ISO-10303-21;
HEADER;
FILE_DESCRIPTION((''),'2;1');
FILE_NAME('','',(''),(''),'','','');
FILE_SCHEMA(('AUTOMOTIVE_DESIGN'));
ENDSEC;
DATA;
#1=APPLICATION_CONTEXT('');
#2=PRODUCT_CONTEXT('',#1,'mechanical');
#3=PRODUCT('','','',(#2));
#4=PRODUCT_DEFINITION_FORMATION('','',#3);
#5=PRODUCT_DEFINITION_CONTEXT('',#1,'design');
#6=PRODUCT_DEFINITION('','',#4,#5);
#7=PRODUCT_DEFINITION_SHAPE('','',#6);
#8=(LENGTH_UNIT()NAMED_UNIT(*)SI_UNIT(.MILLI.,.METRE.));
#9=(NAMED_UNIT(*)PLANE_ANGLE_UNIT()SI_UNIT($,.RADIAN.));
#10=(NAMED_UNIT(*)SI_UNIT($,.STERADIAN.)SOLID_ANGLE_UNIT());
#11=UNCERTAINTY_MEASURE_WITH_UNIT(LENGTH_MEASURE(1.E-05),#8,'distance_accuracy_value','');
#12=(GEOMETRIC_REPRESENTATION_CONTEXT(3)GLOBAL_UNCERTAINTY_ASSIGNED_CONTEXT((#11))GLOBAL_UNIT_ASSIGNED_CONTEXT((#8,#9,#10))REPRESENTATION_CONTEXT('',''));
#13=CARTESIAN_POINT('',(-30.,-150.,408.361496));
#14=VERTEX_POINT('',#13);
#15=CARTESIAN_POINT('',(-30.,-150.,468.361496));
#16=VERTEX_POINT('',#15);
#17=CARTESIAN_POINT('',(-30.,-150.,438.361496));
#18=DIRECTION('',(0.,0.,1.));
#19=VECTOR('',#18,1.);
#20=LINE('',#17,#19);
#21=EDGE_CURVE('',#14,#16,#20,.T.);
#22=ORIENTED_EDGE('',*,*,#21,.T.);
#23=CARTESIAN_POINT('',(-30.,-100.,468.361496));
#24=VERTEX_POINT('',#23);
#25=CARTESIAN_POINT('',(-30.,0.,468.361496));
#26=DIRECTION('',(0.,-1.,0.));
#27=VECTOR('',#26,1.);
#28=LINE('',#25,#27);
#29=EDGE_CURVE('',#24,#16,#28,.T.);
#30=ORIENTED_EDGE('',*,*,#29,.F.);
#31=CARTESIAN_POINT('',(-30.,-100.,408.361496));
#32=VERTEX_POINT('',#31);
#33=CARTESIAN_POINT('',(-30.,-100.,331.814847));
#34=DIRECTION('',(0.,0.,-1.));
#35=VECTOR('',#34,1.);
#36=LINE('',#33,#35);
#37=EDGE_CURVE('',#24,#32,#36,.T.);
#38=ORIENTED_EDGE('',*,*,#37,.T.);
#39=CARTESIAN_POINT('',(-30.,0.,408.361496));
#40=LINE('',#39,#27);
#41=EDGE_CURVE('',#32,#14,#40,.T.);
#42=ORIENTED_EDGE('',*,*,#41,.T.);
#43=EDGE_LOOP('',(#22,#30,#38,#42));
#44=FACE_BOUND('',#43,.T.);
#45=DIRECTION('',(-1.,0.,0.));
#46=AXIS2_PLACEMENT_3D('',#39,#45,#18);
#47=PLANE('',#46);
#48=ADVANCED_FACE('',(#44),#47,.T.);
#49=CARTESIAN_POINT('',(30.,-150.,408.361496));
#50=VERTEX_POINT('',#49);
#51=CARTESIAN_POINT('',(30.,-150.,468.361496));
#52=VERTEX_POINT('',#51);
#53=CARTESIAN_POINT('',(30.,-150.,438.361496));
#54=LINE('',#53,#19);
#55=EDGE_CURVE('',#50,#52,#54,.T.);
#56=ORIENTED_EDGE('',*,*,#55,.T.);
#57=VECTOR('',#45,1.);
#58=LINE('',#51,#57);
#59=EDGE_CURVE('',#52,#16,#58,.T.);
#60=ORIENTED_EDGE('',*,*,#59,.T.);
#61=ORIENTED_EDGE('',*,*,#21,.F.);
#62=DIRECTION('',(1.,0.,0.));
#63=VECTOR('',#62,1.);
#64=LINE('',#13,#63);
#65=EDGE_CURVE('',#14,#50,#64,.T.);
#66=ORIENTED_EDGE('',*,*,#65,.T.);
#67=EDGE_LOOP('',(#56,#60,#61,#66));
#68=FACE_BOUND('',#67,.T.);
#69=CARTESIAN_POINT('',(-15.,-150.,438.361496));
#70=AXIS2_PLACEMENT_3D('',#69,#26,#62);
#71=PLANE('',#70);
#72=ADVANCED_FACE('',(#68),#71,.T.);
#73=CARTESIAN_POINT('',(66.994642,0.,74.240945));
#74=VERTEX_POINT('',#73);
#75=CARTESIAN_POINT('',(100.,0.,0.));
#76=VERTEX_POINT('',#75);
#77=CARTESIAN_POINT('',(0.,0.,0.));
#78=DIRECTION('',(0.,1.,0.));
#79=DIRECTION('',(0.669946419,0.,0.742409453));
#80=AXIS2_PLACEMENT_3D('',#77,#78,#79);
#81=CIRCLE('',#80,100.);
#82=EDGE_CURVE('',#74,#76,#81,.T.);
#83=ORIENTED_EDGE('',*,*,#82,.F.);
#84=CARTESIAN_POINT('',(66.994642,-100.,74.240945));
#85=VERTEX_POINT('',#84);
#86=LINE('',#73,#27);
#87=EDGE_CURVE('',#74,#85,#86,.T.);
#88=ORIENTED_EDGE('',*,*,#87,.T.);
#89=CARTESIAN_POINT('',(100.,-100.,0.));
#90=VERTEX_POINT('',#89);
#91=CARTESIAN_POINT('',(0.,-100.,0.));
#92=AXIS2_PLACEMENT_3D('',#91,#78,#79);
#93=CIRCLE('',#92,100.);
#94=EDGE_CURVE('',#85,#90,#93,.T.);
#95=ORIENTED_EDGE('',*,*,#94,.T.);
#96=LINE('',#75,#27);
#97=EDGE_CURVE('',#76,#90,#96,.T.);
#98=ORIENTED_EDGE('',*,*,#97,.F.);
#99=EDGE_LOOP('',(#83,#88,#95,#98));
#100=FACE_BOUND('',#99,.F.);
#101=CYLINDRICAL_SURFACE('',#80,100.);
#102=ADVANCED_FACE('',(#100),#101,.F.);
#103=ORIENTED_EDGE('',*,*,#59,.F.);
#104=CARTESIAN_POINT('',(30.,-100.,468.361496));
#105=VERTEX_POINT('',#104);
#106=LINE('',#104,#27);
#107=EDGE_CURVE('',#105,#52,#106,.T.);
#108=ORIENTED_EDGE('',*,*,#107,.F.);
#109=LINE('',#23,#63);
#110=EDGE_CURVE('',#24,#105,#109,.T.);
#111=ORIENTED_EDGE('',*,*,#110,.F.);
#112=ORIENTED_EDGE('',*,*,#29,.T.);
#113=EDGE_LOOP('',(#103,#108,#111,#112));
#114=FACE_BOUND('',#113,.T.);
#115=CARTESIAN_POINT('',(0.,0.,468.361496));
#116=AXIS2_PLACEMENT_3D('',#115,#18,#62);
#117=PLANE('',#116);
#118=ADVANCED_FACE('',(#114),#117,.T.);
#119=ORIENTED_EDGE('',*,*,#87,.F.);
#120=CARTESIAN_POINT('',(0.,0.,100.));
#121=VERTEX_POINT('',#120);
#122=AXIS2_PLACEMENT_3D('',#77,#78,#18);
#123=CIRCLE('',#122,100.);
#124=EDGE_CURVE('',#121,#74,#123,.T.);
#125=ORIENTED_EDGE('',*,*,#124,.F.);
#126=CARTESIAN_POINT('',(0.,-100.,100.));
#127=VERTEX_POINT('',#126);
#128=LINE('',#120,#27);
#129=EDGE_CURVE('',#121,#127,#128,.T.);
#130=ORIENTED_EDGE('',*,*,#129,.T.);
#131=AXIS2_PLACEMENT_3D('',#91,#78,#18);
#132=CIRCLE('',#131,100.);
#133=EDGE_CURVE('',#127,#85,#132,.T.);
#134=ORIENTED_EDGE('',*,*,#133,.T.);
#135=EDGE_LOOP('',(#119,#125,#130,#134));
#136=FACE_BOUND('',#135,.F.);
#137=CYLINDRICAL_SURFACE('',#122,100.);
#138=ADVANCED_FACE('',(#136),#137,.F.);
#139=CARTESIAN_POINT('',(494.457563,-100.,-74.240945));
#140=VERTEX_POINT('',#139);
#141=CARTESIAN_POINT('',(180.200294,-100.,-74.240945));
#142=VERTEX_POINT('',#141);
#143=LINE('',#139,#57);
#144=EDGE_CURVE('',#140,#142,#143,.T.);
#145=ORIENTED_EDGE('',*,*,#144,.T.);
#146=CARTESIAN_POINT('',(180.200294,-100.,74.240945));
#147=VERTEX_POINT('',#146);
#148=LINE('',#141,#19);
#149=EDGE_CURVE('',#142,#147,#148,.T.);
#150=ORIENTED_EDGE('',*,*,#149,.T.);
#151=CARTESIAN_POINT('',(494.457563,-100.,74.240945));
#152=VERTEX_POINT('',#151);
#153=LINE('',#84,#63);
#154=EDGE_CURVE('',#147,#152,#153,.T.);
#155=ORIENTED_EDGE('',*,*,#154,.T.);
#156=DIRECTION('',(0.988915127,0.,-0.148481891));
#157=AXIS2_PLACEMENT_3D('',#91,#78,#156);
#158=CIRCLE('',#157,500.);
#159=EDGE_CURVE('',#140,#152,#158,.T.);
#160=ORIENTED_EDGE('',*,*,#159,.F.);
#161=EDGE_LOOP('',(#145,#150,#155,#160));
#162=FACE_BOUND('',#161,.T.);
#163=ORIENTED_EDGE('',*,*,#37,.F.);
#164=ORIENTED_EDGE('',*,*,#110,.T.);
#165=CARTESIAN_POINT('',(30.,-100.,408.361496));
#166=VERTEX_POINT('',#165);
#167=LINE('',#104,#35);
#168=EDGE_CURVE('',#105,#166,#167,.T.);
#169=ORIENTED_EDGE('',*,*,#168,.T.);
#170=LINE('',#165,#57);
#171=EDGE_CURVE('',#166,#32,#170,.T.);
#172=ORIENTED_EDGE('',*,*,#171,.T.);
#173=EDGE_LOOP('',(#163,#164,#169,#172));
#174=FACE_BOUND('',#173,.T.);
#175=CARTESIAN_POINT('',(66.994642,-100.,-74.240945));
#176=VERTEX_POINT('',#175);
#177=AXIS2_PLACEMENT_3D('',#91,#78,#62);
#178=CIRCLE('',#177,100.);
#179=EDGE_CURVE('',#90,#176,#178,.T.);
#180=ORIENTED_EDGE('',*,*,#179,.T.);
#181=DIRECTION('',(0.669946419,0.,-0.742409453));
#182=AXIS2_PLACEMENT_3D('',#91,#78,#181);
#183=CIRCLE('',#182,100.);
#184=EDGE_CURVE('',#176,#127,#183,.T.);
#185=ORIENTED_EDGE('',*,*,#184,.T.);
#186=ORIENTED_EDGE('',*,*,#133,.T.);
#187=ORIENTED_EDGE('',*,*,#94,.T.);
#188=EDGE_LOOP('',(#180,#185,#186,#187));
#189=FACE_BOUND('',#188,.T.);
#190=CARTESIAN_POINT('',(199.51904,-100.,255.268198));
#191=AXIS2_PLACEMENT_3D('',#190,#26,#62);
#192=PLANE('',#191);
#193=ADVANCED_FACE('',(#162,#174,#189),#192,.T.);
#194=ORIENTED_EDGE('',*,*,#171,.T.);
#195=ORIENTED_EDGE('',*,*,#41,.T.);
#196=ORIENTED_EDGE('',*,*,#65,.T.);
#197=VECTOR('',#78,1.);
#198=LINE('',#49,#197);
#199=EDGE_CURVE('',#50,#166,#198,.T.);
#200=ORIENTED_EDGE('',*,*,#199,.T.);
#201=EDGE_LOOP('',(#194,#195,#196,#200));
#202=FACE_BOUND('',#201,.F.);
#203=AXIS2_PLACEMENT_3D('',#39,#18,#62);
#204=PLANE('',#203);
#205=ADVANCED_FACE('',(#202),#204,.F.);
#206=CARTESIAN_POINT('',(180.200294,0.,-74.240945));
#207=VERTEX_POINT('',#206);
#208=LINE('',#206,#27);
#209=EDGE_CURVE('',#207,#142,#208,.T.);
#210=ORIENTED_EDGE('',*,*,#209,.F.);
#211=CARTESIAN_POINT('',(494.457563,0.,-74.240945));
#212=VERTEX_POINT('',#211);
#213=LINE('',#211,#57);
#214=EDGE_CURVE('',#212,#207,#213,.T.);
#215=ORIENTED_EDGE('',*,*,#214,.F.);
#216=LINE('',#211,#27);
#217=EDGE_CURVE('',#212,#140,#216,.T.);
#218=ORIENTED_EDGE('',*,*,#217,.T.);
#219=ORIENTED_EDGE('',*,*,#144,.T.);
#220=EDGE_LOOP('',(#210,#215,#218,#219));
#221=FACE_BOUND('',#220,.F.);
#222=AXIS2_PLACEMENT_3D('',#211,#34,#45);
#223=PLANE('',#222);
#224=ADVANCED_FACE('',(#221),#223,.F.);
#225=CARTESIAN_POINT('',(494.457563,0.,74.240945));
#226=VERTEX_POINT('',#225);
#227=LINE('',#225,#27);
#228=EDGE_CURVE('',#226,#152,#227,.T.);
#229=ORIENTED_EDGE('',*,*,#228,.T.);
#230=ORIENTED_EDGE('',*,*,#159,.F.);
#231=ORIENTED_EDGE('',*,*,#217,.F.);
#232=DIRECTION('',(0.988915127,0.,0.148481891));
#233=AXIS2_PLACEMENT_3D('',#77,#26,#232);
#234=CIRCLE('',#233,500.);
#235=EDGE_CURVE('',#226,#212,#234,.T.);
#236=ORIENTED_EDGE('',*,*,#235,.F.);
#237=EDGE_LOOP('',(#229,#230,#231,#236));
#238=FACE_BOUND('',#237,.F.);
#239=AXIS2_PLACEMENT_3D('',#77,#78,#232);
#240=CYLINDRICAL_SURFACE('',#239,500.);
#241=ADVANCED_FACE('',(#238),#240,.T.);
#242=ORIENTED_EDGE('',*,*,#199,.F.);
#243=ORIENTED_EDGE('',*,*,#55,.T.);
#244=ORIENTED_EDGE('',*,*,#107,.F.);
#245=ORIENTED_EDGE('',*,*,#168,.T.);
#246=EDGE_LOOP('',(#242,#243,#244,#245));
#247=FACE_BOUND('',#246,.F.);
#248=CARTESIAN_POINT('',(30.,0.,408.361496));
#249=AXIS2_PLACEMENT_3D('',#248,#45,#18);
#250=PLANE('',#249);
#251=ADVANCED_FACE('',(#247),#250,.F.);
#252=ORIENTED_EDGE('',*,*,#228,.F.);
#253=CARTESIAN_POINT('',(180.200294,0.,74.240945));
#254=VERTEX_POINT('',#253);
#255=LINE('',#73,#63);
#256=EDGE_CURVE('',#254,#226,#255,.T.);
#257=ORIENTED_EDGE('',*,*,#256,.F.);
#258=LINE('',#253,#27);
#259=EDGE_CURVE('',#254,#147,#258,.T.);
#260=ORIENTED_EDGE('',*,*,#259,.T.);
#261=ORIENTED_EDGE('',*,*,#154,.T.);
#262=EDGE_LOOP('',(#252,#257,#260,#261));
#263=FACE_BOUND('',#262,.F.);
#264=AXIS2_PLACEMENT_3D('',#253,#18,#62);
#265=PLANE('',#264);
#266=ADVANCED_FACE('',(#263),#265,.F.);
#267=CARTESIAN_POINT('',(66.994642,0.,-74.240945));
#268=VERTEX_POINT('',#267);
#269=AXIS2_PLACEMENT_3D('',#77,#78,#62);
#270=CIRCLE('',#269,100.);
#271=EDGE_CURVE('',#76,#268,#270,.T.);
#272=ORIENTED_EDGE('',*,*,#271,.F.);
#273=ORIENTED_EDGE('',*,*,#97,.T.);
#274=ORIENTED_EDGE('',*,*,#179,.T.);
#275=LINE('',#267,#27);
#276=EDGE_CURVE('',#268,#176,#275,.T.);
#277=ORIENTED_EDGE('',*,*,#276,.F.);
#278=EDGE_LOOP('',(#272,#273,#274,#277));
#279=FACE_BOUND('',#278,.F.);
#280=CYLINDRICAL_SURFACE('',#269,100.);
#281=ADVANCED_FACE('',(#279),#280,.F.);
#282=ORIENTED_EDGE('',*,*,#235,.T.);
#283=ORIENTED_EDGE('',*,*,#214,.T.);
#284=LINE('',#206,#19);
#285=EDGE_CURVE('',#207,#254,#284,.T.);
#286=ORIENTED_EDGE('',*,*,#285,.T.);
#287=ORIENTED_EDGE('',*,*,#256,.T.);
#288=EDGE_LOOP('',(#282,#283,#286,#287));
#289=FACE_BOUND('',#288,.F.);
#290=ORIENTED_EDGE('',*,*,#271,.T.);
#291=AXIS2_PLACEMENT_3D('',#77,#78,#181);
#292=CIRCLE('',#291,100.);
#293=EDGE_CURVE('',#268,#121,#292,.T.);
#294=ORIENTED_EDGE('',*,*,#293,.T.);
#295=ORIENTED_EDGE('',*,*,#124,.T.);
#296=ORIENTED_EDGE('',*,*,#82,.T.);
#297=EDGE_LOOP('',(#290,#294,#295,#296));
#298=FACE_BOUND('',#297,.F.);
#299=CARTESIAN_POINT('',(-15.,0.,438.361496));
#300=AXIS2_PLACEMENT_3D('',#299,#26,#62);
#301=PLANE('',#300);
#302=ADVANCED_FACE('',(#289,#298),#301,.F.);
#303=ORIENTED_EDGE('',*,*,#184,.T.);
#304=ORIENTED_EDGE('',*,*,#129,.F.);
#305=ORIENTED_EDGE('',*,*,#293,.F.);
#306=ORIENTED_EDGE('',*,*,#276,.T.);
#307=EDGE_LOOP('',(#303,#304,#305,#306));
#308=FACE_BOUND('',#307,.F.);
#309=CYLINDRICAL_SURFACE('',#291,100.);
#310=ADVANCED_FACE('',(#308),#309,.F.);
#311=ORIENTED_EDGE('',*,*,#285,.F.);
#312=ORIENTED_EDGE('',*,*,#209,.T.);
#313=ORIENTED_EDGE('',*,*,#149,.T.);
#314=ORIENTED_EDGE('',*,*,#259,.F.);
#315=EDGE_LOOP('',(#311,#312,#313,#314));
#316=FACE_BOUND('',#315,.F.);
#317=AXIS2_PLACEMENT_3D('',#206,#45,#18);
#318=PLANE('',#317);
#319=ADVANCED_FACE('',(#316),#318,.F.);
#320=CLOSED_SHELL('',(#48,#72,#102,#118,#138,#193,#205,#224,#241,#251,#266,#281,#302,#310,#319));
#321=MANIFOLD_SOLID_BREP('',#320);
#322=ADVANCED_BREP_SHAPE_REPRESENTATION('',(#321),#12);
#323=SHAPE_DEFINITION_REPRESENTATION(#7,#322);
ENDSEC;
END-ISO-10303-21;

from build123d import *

# Parameters (mm, degrees)
F0_W     = 30
F0_H     = 60
F1_DEPTH = 100
F2_DEPTH = 102
F4_DEPTH = 100
F5_DEPTH = 150


# Not quite as in the source:
# - a feature of the source that left no trace in its solid (it failed there, or was rolled back) is left out
# - a feature names something its author has since deleted; it is built from what else it names


with BuildPart() as f1:
    # F0 (on Front) → F1 (new body)
    with BuildSketch(Plane.XZ):
        with BuildLine():
            Line((180.2002936602, 74.2409452796), (494.457563441, 74.2409452796))
            ThreePointArc((494.457563441, 74.2409452796), (326.2510746037, 378.8934366282), (0, 500))
            Line((0, 500), (0, 468.3614957333))
            Line((0, 468.3614957333), (30, 468.3614957333))
            Line((30, 468.3614957333), (30, 408.3614957333))
            Line((30, 408.3614957333), (0, 408.3614957333))
            Line((0, 408.3614957333), (0, 100))
            ThreePointArc((0, 100), (35.8880584042, 93.3383483033), (66.9946419051, 74.2409452796))
            Line((66.9946419051, 74.2409452796), (180.2002936602, 74.2409452796))
        make_face()
        with BuildLine():
            ThreePointArc((0, 500), (-378.8934366282, -326.2510746037), (494.457563441, -74.2409452796))
            Line((494.457563441, -74.2409452796), (180.2002936602, -74.2409452796))
            Line((180.2002936602, -74.2409452796), (66.9946419051, -74.2409452796))
            ThreePointArc((66.9946419051, -74.2409452796), (-93.3383483033, -35.8880584042), (0, 100))
            Line((0, 100), (0, 408.3614957333))
            Line((0, 408.3614957333), (-30, 408.3614957333))
            Line((-30, 408.3614957333), (-30, 468.3614957333))
            Line((-30, 468.3614957333), (0, 468.3614957333))
            Line((0, 468.3614957333), (0, 500))
        make_face()
        with BuildLine():
            Line((180.2002936602, -74.2409452796), (180.2002936602, 74.2409452796))
            Line((180.2002936602, 74.2409452796), (66.9946419051, 74.2409452796))
            ThreePointArc((66.9946419051, 74.2409452796), (91.3768684912, 40.6234895688), (100, 0))
            ThreePointArc((100, 0), (91.3768684912, -40.6234895688), (66.9946419051, -74.2409452796))
            Line((66.9946419051, -74.2409452796), (180.2002936602, -74.2409452796))
        make_face()
        with Locations((-15, 438.3614957333)):
            Rectangle(F0_W, F0_H)
    extrude(amount=F1_DEPTH)

    # F0 (on Front) → F2 (join)
    with BuildSketch(Plane.XZ):
        with Locations((15, 438.3614957333)):
            Rectangle(F0_W, F0_H)
    extrude(amount=F2_DEPTH)

    # F0 (on Front) → F4 (join)
    with BuildSketch(Plane.XZ):
        with BuildLine():
            Line((180.2002936602, 74.2409452796), (494.457563441, 74.2409452796))
            ThreePointArc((494.457563441, 74.2409452796), (326.2510746037, 378.8934366282), (0, 500))
            Line((0, 500), (0, 468.3614957333))
            Line((0, 468.3614957333), (30, 468.3614957333))
            Line((30, 468.3614957333), (30, 408.3614957333))
            Line((30, 408.3614957333), (0, 408.3614957333))
            Line((0, 408.3614957333), (0, 100))
            ThreePointArc((0, 100), (35.8880584042, 93.3383483033), (66.9946419051, 74.2409452796))
            Line((66.9946419051, 74.2409452796), (180.2002936602, 74.2409452796))
        make_face()
    extrude(amount=F4_DEPTH)

    # F0 (on Front) → F5 (join)
    with BuildSketch(Plane.XZ):
        with Locations((-15, 438.3614957333)):
            Rectangle(F0_W, F0_H)
        with Locations((15, 438.3614957333)):
            Rectangle(F0_W, F0_H)
    extrude(amount=F5_DEPTH)


solid = f1.part
